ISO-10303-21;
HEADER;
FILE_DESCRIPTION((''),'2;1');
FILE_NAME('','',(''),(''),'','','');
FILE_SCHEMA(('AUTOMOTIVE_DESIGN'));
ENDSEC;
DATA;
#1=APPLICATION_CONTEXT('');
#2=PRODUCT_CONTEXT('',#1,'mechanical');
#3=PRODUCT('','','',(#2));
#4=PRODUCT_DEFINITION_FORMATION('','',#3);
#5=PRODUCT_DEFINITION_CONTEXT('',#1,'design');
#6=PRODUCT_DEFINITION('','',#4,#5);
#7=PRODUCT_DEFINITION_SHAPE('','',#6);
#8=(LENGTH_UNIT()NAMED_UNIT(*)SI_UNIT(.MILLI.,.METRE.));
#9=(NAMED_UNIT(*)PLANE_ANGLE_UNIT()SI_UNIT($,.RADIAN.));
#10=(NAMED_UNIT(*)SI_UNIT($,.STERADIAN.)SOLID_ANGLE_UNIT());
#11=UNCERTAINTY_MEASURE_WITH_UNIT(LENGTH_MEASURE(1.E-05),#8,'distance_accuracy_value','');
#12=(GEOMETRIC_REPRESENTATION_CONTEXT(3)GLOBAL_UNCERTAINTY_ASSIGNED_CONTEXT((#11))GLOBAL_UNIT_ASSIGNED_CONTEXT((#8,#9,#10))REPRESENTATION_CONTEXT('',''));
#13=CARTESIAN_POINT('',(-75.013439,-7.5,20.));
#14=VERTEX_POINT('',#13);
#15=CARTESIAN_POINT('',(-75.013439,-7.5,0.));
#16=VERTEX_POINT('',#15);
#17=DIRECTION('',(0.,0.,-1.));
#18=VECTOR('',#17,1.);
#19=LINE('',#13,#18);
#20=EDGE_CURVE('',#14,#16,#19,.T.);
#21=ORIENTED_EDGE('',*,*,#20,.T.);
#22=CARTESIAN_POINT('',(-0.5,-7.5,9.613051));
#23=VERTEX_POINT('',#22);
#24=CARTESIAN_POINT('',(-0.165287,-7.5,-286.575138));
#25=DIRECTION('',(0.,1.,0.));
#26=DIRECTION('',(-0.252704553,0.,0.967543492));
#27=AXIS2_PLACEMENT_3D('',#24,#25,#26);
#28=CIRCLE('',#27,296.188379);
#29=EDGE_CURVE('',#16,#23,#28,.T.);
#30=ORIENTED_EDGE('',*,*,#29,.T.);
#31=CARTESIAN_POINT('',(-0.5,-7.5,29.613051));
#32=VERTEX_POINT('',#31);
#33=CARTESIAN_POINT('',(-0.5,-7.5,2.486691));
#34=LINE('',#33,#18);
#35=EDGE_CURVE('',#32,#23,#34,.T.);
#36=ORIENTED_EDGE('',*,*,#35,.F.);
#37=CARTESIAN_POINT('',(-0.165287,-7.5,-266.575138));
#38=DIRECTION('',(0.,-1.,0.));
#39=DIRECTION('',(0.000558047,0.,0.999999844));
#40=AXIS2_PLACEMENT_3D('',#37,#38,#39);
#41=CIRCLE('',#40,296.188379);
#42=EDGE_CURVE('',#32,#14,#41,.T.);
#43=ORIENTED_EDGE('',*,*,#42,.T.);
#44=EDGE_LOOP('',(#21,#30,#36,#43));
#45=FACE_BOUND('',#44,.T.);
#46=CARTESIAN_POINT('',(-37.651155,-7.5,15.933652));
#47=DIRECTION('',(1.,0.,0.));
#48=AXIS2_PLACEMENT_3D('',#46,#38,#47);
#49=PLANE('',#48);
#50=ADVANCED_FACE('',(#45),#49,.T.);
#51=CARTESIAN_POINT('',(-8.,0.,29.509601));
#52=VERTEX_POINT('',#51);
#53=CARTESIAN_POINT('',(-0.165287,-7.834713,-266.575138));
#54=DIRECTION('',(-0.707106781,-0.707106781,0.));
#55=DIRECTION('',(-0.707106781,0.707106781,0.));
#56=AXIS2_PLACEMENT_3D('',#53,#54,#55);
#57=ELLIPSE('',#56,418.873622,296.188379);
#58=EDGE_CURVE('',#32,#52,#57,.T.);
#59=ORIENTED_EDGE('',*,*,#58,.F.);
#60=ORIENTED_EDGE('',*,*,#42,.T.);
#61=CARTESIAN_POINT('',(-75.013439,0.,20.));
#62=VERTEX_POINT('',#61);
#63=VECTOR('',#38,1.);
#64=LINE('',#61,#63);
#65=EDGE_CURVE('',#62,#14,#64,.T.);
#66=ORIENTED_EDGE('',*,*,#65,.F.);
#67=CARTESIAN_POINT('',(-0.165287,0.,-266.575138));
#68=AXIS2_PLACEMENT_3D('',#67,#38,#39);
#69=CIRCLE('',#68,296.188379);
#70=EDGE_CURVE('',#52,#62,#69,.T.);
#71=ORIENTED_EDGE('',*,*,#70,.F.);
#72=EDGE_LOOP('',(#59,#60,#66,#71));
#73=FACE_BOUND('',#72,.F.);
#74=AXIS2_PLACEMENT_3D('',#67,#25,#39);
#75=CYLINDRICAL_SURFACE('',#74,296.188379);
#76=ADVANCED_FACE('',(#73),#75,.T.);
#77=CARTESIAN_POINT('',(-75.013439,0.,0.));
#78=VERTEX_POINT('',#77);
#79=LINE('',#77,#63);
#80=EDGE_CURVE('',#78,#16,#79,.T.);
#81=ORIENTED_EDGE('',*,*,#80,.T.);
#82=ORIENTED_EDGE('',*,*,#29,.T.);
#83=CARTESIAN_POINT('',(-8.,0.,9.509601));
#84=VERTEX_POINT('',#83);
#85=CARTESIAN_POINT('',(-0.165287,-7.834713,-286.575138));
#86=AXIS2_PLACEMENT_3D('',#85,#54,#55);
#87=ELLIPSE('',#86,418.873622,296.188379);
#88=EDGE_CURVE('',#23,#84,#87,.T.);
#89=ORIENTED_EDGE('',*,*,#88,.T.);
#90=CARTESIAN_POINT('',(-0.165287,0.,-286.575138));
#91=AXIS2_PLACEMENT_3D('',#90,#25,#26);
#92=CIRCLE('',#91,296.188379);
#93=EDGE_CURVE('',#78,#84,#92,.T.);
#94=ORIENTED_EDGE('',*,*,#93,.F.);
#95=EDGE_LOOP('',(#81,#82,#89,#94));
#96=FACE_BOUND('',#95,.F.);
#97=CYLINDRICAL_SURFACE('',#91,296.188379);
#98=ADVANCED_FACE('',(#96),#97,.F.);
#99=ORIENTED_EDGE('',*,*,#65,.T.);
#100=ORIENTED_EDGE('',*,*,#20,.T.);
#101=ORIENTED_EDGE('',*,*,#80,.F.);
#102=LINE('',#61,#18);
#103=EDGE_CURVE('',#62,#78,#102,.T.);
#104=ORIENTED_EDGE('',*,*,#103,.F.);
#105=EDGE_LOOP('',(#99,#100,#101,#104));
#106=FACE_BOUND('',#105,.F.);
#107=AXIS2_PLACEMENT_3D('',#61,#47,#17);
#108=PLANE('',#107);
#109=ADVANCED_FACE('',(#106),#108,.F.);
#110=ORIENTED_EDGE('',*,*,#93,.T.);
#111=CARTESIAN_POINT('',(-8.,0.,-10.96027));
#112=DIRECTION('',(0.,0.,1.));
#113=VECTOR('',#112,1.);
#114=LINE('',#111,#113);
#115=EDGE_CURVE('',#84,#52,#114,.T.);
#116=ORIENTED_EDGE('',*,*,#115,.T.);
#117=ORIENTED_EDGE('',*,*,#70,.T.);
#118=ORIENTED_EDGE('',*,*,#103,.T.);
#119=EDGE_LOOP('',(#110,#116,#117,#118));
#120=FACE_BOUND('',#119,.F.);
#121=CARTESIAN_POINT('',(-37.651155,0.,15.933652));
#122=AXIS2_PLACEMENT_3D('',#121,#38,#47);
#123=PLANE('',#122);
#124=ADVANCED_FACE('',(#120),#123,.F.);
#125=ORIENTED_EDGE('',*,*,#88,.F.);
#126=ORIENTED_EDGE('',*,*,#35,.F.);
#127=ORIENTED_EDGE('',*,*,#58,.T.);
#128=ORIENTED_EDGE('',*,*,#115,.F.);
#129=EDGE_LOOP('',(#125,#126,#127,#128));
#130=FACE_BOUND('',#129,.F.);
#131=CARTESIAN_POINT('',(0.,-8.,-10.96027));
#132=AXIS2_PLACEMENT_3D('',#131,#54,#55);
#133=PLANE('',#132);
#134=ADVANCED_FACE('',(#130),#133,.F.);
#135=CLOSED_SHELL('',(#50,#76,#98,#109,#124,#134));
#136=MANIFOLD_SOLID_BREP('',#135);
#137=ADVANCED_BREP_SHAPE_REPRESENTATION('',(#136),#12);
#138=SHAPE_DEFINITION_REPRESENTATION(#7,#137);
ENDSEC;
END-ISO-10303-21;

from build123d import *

# Parameters (mm, degrees)
F1_DEPTH    = 7.5
F2_T1_DEPTH = 61.1469278075


# Not quite as in the source:
# - a fillet or chamfer that OpenCascade refuses, or shapes differently, is made with other operations: its cross-section is extruded or revolved along the edge and cut away or added
# - a feature names something its author has since deleted; it is built from what else it names


with BuildPart() as f1:
    # F0 (on Front) → F1 (new body)
    with BuildSketch(Plane.XZ):
        with BuildLine():
            Line((-75.013438644, 20), (-75.013438644, 0))
            ThreePointArc((-75.013438644, 0), (-37.8148015278, 7.2106165672), (0, 9.613194347))
            Line((0, 9.613194347), (0, 29.613194347))
            ThreePointArc((0, 29.613194347), (-37.8148015278, 27.2106165672), (-75.013438644, 20))
        make_face()
    extrude(amount=F1_DEPTH)

    # F2: chamfer of 8 on 1 edges, made by hand

    # F2_s2 → F2_t1 (cut)
    with BuildSketch(Plane.XY.offset(-10.9602695567)):
        Polygon((0, -8), (-8, 0), (0, 0), align=None)
    extrude(amount=F2_T1_DEPTH, mode=Mode.SUBTRACT)


solid = f1.part
